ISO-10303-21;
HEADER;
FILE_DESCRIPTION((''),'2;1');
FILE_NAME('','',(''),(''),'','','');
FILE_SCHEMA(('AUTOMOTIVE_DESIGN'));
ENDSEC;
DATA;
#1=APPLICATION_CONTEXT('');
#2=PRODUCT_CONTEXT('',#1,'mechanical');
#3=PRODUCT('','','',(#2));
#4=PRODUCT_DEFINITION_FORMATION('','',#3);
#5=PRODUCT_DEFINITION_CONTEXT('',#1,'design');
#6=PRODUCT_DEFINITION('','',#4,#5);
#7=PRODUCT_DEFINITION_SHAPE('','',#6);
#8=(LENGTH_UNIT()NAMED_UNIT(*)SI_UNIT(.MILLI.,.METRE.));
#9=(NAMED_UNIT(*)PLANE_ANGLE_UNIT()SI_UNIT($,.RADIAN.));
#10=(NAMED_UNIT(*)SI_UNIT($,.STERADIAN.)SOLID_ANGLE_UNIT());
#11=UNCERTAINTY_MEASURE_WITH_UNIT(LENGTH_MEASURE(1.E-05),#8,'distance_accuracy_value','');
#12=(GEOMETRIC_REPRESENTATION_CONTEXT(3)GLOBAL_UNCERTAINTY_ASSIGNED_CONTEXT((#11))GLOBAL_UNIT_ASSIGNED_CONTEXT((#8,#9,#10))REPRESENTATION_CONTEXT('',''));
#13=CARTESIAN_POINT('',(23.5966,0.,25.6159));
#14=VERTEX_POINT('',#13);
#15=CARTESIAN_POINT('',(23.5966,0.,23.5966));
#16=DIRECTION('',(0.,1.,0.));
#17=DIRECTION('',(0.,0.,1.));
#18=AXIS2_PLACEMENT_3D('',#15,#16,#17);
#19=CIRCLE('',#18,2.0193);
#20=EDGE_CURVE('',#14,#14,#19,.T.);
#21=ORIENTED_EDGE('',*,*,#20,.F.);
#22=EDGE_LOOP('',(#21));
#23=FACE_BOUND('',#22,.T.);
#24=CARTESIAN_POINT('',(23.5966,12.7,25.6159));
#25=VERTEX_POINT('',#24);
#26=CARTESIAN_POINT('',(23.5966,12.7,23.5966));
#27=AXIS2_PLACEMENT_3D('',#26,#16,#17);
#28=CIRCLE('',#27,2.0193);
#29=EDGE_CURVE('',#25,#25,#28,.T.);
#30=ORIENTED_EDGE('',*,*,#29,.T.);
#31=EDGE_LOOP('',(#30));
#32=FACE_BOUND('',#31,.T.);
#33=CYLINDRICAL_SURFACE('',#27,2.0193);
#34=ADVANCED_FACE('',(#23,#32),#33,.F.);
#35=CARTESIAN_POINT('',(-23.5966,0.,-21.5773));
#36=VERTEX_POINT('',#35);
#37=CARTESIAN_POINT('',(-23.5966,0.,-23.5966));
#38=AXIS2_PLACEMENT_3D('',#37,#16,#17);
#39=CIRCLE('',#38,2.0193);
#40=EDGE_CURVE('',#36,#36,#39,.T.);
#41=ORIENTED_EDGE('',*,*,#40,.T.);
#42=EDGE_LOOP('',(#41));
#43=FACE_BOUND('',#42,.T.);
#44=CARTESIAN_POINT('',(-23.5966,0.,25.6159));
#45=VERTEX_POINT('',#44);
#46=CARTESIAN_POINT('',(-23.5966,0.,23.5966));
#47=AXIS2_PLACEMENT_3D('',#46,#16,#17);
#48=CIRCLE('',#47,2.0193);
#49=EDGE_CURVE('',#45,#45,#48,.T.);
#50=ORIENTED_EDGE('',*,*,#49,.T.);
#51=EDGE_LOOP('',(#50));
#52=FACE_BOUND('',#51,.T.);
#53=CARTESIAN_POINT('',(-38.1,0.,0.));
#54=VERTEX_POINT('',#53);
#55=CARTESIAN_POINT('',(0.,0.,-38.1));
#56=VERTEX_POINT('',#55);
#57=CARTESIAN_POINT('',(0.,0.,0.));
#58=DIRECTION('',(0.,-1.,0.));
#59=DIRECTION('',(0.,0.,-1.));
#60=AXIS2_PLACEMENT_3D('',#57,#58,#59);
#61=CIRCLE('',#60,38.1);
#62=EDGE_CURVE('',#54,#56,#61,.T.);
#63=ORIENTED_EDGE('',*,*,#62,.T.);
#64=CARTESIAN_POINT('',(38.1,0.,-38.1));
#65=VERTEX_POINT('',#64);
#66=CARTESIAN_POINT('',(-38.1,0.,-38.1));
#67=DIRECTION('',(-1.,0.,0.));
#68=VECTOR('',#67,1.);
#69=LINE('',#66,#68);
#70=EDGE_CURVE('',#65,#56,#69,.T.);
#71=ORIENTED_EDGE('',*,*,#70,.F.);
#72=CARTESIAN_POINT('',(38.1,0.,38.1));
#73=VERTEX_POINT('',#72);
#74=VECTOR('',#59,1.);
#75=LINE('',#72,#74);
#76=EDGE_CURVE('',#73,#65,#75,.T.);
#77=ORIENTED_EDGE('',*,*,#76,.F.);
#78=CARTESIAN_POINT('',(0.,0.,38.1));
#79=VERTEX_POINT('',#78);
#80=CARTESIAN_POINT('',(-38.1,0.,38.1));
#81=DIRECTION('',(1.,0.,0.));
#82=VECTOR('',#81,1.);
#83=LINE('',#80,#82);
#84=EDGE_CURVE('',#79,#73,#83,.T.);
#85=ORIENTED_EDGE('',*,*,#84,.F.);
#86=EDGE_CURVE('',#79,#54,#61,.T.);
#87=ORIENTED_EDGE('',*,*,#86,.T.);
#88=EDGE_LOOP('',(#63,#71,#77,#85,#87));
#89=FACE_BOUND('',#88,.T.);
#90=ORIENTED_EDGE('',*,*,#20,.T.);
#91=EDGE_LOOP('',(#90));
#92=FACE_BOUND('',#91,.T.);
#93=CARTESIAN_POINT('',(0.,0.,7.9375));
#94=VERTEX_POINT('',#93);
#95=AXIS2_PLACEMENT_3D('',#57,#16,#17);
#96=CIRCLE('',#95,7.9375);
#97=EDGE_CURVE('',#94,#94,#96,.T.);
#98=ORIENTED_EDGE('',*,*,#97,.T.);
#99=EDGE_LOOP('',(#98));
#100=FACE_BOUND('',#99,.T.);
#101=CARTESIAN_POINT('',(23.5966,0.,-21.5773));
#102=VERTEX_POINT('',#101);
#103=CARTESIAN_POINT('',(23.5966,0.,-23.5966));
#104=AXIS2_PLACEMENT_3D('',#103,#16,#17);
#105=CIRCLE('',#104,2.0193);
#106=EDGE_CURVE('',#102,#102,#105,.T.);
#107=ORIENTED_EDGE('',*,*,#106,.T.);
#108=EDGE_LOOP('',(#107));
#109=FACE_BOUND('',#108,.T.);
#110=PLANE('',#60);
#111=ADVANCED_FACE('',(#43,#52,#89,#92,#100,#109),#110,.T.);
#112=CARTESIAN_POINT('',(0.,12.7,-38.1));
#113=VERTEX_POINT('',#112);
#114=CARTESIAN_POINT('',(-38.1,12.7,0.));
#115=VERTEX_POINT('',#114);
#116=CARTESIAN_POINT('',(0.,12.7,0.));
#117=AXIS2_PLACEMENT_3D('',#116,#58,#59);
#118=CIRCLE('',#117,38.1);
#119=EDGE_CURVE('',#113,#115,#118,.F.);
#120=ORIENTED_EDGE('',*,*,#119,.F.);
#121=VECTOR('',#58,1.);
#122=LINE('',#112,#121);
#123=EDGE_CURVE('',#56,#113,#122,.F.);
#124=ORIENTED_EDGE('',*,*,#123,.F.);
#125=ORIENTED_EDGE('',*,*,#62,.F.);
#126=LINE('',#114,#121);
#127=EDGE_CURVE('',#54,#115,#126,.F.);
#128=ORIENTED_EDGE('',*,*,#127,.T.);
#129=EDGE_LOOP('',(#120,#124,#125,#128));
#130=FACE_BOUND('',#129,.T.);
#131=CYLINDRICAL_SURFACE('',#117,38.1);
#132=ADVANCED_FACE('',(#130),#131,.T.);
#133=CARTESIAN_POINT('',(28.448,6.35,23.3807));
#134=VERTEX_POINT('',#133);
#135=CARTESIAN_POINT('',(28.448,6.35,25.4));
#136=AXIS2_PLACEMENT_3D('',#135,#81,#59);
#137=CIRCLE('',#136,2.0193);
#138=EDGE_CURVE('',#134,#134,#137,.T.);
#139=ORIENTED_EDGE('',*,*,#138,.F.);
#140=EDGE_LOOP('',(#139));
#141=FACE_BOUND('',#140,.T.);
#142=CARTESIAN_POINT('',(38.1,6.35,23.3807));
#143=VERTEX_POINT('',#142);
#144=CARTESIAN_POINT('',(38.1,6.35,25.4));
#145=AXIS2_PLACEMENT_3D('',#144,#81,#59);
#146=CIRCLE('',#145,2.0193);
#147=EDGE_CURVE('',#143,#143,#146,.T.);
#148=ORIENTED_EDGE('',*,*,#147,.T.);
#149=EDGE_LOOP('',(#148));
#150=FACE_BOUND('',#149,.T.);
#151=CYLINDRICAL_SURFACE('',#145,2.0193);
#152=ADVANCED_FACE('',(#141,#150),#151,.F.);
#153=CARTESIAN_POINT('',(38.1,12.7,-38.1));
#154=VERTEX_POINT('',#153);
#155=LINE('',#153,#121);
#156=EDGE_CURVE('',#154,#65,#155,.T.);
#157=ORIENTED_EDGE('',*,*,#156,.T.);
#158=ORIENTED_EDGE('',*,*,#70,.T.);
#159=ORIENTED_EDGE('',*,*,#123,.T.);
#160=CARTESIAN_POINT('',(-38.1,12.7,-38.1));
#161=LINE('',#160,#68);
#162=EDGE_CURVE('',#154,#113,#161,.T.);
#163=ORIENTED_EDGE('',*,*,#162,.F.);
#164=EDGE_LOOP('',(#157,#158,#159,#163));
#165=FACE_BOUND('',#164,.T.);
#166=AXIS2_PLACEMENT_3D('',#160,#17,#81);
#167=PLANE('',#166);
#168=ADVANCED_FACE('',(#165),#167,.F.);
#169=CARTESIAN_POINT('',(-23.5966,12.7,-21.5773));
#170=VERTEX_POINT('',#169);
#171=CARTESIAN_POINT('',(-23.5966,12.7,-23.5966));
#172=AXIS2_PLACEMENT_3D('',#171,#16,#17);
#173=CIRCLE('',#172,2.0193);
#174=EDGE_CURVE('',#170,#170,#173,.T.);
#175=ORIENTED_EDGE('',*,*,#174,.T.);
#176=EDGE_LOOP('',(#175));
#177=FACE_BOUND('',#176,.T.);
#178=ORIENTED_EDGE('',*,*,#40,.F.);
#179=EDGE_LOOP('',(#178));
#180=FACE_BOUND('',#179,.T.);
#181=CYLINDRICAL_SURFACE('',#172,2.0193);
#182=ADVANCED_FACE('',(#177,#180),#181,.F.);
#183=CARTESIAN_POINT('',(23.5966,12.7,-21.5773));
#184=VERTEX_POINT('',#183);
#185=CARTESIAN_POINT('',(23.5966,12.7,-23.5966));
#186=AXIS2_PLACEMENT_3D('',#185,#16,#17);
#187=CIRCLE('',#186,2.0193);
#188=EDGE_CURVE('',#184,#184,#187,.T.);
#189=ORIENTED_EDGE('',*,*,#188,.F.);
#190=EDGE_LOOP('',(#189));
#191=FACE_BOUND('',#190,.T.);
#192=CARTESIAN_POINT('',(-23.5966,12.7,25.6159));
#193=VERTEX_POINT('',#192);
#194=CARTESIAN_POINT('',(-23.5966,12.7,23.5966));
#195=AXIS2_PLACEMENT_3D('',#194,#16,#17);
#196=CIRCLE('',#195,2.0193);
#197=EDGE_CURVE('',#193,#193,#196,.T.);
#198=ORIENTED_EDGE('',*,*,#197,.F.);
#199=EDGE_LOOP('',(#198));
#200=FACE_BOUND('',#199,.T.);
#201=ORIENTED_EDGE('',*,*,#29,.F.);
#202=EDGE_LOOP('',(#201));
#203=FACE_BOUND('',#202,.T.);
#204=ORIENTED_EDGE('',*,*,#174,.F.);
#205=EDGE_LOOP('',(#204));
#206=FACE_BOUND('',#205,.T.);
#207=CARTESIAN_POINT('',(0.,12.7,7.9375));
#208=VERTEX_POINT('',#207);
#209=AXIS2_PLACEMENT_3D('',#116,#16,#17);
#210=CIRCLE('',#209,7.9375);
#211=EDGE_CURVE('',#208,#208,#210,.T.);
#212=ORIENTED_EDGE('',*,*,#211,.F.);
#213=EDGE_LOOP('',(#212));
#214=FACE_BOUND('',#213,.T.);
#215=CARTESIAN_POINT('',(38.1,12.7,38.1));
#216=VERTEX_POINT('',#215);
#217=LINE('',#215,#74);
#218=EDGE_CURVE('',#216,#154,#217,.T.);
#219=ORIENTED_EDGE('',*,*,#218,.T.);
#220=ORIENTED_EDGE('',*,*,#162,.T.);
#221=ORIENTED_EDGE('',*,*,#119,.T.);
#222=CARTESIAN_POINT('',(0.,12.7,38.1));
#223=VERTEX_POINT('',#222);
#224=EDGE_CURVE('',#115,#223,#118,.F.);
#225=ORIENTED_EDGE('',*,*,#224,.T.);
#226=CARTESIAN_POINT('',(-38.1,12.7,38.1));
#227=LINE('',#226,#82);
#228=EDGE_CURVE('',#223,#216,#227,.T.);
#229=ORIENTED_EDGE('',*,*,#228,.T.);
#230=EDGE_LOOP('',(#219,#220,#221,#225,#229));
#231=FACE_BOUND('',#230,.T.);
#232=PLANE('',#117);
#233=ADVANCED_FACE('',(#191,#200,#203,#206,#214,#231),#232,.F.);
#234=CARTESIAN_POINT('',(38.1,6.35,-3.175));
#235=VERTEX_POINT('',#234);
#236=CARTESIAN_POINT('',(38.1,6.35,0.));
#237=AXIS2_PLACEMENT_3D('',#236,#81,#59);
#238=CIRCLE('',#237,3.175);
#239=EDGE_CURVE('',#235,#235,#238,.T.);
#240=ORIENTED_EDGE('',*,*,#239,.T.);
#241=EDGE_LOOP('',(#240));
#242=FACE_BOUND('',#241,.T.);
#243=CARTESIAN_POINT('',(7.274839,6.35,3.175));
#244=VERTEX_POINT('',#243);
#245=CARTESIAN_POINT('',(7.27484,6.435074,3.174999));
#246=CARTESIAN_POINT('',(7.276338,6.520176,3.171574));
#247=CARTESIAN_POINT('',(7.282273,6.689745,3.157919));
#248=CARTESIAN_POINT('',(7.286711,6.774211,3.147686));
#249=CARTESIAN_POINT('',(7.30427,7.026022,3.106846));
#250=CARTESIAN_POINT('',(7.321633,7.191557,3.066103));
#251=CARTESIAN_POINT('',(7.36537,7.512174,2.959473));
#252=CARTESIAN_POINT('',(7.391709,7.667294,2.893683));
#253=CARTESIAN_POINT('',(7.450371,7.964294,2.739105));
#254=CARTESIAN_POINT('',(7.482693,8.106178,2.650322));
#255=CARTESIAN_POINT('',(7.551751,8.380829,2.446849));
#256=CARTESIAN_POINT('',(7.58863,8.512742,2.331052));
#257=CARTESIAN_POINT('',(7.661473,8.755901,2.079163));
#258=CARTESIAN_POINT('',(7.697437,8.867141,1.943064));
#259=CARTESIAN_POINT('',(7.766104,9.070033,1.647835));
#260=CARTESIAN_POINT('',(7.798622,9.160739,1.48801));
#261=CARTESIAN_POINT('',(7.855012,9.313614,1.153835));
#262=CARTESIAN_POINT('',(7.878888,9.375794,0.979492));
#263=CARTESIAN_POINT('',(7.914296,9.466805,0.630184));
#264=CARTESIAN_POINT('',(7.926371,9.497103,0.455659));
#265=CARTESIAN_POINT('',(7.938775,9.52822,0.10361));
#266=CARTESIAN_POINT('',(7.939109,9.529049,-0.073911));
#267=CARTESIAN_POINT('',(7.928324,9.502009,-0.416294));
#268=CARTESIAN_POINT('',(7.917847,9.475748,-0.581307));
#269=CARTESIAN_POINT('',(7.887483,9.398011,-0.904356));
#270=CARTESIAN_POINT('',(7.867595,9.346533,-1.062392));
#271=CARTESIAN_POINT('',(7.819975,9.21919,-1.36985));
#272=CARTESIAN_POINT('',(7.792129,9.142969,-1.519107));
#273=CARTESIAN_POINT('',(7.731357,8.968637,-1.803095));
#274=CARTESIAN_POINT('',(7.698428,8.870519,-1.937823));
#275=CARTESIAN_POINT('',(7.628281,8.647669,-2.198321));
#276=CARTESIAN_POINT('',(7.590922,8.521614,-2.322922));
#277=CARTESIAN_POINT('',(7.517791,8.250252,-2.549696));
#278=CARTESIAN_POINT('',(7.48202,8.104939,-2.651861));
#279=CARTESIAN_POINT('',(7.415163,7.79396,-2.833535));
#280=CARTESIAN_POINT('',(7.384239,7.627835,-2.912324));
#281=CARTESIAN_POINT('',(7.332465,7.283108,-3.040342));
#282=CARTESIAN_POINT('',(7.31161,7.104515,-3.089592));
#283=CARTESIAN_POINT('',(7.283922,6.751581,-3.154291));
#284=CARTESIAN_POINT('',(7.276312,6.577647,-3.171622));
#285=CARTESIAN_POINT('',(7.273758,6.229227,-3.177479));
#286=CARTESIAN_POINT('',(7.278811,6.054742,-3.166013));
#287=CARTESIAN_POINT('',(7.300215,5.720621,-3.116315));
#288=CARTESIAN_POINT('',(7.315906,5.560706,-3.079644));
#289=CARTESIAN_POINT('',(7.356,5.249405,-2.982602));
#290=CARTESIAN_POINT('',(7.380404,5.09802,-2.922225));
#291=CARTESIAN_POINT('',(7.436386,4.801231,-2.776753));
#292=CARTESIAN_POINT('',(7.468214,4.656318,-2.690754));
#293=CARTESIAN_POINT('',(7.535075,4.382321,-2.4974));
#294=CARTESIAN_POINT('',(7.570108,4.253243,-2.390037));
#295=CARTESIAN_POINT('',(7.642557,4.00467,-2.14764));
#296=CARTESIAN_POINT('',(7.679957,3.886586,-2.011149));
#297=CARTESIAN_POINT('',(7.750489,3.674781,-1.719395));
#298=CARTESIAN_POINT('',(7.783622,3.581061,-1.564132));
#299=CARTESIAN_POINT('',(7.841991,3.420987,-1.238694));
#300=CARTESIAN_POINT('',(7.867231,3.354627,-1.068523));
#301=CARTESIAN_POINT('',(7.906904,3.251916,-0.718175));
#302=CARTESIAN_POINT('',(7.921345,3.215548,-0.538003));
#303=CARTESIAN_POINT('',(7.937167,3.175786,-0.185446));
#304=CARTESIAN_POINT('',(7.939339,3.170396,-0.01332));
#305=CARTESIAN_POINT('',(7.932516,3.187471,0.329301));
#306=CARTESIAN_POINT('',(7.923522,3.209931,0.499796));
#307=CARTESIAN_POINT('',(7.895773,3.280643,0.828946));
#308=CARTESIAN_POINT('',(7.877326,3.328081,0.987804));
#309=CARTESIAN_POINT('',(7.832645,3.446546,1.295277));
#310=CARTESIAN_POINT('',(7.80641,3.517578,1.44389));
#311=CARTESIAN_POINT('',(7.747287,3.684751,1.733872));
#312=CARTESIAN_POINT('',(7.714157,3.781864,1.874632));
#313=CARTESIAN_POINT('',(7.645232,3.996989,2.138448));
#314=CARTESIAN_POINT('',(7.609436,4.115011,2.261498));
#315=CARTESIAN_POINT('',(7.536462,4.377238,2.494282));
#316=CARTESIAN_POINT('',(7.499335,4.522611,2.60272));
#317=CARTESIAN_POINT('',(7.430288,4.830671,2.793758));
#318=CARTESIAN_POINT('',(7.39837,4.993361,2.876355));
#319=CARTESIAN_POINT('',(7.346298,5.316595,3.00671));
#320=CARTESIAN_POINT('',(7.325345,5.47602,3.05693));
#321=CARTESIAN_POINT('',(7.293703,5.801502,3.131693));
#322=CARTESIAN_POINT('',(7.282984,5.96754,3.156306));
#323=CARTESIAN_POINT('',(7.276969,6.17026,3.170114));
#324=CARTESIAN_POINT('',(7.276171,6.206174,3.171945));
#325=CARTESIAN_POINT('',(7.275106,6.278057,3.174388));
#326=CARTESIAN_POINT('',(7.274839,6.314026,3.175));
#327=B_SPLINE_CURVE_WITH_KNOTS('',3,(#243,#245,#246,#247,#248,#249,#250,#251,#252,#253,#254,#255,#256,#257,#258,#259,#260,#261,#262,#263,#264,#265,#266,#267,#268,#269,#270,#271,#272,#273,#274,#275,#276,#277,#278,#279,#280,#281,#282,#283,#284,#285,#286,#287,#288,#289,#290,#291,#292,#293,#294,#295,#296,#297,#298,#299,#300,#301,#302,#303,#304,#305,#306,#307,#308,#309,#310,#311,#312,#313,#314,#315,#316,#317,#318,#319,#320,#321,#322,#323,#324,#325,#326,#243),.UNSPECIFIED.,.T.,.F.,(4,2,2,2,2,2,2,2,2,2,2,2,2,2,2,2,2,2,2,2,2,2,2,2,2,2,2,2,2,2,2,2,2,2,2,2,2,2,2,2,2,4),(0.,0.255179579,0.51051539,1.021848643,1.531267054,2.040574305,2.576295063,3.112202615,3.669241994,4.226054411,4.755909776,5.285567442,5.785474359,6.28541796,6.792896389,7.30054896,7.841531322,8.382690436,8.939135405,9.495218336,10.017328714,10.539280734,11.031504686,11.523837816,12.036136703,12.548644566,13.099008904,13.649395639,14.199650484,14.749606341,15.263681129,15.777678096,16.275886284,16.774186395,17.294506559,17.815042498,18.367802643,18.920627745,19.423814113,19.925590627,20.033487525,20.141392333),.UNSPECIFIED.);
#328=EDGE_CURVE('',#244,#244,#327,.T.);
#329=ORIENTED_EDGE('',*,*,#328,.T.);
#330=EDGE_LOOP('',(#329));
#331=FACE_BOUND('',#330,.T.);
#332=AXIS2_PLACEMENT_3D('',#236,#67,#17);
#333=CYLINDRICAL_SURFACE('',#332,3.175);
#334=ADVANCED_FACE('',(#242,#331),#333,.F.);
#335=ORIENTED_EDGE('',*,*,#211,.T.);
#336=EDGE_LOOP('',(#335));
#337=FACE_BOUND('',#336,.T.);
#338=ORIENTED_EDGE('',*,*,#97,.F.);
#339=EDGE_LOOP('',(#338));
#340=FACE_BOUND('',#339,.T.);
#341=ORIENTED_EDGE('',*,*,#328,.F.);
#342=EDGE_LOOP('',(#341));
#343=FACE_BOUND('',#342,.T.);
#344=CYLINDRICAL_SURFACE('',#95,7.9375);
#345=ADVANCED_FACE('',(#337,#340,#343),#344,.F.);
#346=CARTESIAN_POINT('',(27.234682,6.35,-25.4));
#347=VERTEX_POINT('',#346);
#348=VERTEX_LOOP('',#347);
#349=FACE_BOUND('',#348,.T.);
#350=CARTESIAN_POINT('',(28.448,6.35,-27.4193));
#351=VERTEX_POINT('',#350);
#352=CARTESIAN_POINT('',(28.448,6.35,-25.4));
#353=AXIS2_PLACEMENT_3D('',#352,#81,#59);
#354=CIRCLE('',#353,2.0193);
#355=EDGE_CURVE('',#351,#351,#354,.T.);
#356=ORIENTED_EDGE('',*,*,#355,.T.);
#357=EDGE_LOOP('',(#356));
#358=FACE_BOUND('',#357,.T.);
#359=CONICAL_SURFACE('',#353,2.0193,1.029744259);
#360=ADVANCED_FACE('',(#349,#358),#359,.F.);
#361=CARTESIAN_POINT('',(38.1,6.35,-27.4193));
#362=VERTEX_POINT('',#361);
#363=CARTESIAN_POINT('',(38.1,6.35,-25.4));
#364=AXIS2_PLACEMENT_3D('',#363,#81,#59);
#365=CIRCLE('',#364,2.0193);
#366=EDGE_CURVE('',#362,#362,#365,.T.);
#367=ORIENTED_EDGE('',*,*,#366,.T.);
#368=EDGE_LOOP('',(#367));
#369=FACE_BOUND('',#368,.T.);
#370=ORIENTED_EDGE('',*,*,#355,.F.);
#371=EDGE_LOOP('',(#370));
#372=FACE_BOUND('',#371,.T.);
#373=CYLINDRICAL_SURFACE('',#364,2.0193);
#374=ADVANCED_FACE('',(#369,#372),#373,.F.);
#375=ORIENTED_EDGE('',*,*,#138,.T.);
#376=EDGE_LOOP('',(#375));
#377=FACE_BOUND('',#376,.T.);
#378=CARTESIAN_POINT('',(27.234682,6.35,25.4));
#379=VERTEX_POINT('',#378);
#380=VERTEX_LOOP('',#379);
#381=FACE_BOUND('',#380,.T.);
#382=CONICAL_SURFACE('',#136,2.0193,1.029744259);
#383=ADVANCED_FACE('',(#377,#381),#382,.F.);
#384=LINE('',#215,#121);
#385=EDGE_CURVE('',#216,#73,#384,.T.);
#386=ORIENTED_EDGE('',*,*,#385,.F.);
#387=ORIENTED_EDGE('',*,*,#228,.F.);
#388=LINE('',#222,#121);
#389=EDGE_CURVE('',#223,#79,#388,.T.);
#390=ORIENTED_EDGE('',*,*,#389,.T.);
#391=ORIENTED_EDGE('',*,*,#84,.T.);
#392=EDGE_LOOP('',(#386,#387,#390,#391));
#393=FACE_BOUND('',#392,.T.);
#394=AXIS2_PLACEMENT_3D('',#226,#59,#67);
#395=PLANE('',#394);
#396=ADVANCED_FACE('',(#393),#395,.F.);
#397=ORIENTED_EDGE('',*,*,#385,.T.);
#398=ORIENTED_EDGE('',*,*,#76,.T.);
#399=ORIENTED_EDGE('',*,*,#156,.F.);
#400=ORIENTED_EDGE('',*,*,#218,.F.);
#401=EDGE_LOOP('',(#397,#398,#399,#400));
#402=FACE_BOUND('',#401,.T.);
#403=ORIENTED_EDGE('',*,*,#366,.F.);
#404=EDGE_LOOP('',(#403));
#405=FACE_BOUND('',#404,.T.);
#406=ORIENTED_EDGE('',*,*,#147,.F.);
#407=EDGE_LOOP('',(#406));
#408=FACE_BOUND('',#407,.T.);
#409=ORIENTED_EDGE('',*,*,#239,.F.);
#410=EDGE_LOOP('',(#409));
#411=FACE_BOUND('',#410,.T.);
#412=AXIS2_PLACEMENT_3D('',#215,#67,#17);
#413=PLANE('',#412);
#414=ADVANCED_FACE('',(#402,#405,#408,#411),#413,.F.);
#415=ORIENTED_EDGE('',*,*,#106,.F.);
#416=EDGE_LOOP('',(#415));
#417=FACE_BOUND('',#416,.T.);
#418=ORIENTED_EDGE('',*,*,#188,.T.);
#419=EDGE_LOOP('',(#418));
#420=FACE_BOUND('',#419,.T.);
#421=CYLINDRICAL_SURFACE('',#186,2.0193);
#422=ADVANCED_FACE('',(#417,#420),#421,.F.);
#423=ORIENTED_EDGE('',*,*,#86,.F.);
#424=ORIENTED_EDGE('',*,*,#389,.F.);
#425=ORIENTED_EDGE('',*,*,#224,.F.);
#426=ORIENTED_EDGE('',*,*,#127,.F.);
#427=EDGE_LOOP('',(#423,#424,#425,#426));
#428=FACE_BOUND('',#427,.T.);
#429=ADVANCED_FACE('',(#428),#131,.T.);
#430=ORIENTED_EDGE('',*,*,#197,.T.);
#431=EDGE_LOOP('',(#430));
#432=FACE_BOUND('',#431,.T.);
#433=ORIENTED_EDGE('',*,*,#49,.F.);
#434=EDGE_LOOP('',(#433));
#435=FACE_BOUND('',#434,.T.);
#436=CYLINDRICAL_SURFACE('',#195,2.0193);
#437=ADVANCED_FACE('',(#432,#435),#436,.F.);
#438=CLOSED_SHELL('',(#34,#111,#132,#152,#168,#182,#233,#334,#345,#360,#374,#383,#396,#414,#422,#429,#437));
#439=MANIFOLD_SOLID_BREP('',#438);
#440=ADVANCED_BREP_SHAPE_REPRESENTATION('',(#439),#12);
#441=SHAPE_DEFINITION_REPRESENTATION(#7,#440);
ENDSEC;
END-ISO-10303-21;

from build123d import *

# Parameters (mm, degrees)
SKETCH1_W                  = 76.2
SKETCH1_H                  = 76.2
BOSS_EXTRUDE1_DEPTH        = 12.7
F_10_32_TAPPED_HOLE1_D     = 4.0386
F_10_32_TAPPED_HOLE1_DEPTH = 9.652
F_10_32_TAPPED_HOLE1_TIP   = 1.213317848
F_10_32_TAPPED_HOLE2_D     = 4.0386
SKETCH9_R                  = 7.9375
CUT_EXTRUDE2_DEPTH         = 56.358016583
FILLET1_R                  = 38.1
SKETCH10_R                 = 3.175
CUT_EXTRUDE3_DEPTH         = 56.358016583


with BuildPart() as part:
    # Sketch1 → Boss-Extrude1 (new body)
    with BuildSketch(Plane(origin=(0, 0, 0), x_dir=(1, 0, 0), z_dir=(0, 1, 0))):
        Rectangle(SKETCH1_W, SKETCH1_H)
    extrude(amount=BOSS_EXTRUDE1_DEPTH)

    # #10-32 Tapped Hole1
    with Locations(Plane(origin=(38.1, 0, 0), x_dir=(0, 0, -1), z_dir=(1, 0, 0))):
        with Locations((-25.4, 6.35), (25.4, 6.35)):
            Hole(F_10_32_TAPPED_HOLE1_D / 2, depth=F_10_32_TAPPED_HOLE1_DEPTH)
            with Locations((0, 0, -(F_10_32_TAPPED_HOLE1_DEPTH + F_10_32_TAPPED_HOLE1_TIP / 2))):  # 118° drill point
                Cone(0, F_10_32_TAPPED_HOLE1_D / 2, F_10_32_TAPPED_HOLE1_TIP, mode=Mode.SUBTRACT)

    # #10-32 Tapped Hole2 (through all)
    with Locations(Plane(origin=(0, 12.7, 0), x_dir=(1, 0, 0), z_dir=(0, 1, 0))):
        with Locations((-23.5966, -23.5966), (-23.5966, 23.5966), (23.5966, 23.5966), (23.5966, -23.5966)):
            Hole(F_10_32_TAPPED_HOLE2_D / 2)

    # Sketch9 → Cut-Extrude2 (cut, through all)
    with BuildSketch(Plane(origin=(0, 12.7, 0), x_dir=(1, 0, 0), z_dir=(0, 1, 0))):
        with Locations(Location((0, 0, 0), (0, 0, 270))):
            Circle(SKETCH9_R)
    extrude(amount=-CUT_EXTRUDE2_DEPTH, mode=Mode.SUBTRACT)

    # Fillet1
    fillet1_edges = [part.edges().sort_by_distance(p)[0] for p in [
        (-38.1, 6.35, -38.1),
        (-38.1, 6.35, 38.1),
    ]]
    fillet(fillet1_edges, radius=FILLET1_R - 0.0001)  # a hair under: the kernel refuses the full size

    # Sketch10 → Cut-Extrude3 (cut, through all)
    with BuildSketch(Plane(origin=(0, 0, 0), x_dir=(0, 0, -1), z_dir=(1, 0, 0))):
        with Locations(Location((0, 6.35, 0), (0, 0, 180))):
            Circle(SKETCH10_R)
    extrude(amount=CUT_EXTRUDE3_DEPTH, mode=Mode.SUBTRACT)


solid = part.part
